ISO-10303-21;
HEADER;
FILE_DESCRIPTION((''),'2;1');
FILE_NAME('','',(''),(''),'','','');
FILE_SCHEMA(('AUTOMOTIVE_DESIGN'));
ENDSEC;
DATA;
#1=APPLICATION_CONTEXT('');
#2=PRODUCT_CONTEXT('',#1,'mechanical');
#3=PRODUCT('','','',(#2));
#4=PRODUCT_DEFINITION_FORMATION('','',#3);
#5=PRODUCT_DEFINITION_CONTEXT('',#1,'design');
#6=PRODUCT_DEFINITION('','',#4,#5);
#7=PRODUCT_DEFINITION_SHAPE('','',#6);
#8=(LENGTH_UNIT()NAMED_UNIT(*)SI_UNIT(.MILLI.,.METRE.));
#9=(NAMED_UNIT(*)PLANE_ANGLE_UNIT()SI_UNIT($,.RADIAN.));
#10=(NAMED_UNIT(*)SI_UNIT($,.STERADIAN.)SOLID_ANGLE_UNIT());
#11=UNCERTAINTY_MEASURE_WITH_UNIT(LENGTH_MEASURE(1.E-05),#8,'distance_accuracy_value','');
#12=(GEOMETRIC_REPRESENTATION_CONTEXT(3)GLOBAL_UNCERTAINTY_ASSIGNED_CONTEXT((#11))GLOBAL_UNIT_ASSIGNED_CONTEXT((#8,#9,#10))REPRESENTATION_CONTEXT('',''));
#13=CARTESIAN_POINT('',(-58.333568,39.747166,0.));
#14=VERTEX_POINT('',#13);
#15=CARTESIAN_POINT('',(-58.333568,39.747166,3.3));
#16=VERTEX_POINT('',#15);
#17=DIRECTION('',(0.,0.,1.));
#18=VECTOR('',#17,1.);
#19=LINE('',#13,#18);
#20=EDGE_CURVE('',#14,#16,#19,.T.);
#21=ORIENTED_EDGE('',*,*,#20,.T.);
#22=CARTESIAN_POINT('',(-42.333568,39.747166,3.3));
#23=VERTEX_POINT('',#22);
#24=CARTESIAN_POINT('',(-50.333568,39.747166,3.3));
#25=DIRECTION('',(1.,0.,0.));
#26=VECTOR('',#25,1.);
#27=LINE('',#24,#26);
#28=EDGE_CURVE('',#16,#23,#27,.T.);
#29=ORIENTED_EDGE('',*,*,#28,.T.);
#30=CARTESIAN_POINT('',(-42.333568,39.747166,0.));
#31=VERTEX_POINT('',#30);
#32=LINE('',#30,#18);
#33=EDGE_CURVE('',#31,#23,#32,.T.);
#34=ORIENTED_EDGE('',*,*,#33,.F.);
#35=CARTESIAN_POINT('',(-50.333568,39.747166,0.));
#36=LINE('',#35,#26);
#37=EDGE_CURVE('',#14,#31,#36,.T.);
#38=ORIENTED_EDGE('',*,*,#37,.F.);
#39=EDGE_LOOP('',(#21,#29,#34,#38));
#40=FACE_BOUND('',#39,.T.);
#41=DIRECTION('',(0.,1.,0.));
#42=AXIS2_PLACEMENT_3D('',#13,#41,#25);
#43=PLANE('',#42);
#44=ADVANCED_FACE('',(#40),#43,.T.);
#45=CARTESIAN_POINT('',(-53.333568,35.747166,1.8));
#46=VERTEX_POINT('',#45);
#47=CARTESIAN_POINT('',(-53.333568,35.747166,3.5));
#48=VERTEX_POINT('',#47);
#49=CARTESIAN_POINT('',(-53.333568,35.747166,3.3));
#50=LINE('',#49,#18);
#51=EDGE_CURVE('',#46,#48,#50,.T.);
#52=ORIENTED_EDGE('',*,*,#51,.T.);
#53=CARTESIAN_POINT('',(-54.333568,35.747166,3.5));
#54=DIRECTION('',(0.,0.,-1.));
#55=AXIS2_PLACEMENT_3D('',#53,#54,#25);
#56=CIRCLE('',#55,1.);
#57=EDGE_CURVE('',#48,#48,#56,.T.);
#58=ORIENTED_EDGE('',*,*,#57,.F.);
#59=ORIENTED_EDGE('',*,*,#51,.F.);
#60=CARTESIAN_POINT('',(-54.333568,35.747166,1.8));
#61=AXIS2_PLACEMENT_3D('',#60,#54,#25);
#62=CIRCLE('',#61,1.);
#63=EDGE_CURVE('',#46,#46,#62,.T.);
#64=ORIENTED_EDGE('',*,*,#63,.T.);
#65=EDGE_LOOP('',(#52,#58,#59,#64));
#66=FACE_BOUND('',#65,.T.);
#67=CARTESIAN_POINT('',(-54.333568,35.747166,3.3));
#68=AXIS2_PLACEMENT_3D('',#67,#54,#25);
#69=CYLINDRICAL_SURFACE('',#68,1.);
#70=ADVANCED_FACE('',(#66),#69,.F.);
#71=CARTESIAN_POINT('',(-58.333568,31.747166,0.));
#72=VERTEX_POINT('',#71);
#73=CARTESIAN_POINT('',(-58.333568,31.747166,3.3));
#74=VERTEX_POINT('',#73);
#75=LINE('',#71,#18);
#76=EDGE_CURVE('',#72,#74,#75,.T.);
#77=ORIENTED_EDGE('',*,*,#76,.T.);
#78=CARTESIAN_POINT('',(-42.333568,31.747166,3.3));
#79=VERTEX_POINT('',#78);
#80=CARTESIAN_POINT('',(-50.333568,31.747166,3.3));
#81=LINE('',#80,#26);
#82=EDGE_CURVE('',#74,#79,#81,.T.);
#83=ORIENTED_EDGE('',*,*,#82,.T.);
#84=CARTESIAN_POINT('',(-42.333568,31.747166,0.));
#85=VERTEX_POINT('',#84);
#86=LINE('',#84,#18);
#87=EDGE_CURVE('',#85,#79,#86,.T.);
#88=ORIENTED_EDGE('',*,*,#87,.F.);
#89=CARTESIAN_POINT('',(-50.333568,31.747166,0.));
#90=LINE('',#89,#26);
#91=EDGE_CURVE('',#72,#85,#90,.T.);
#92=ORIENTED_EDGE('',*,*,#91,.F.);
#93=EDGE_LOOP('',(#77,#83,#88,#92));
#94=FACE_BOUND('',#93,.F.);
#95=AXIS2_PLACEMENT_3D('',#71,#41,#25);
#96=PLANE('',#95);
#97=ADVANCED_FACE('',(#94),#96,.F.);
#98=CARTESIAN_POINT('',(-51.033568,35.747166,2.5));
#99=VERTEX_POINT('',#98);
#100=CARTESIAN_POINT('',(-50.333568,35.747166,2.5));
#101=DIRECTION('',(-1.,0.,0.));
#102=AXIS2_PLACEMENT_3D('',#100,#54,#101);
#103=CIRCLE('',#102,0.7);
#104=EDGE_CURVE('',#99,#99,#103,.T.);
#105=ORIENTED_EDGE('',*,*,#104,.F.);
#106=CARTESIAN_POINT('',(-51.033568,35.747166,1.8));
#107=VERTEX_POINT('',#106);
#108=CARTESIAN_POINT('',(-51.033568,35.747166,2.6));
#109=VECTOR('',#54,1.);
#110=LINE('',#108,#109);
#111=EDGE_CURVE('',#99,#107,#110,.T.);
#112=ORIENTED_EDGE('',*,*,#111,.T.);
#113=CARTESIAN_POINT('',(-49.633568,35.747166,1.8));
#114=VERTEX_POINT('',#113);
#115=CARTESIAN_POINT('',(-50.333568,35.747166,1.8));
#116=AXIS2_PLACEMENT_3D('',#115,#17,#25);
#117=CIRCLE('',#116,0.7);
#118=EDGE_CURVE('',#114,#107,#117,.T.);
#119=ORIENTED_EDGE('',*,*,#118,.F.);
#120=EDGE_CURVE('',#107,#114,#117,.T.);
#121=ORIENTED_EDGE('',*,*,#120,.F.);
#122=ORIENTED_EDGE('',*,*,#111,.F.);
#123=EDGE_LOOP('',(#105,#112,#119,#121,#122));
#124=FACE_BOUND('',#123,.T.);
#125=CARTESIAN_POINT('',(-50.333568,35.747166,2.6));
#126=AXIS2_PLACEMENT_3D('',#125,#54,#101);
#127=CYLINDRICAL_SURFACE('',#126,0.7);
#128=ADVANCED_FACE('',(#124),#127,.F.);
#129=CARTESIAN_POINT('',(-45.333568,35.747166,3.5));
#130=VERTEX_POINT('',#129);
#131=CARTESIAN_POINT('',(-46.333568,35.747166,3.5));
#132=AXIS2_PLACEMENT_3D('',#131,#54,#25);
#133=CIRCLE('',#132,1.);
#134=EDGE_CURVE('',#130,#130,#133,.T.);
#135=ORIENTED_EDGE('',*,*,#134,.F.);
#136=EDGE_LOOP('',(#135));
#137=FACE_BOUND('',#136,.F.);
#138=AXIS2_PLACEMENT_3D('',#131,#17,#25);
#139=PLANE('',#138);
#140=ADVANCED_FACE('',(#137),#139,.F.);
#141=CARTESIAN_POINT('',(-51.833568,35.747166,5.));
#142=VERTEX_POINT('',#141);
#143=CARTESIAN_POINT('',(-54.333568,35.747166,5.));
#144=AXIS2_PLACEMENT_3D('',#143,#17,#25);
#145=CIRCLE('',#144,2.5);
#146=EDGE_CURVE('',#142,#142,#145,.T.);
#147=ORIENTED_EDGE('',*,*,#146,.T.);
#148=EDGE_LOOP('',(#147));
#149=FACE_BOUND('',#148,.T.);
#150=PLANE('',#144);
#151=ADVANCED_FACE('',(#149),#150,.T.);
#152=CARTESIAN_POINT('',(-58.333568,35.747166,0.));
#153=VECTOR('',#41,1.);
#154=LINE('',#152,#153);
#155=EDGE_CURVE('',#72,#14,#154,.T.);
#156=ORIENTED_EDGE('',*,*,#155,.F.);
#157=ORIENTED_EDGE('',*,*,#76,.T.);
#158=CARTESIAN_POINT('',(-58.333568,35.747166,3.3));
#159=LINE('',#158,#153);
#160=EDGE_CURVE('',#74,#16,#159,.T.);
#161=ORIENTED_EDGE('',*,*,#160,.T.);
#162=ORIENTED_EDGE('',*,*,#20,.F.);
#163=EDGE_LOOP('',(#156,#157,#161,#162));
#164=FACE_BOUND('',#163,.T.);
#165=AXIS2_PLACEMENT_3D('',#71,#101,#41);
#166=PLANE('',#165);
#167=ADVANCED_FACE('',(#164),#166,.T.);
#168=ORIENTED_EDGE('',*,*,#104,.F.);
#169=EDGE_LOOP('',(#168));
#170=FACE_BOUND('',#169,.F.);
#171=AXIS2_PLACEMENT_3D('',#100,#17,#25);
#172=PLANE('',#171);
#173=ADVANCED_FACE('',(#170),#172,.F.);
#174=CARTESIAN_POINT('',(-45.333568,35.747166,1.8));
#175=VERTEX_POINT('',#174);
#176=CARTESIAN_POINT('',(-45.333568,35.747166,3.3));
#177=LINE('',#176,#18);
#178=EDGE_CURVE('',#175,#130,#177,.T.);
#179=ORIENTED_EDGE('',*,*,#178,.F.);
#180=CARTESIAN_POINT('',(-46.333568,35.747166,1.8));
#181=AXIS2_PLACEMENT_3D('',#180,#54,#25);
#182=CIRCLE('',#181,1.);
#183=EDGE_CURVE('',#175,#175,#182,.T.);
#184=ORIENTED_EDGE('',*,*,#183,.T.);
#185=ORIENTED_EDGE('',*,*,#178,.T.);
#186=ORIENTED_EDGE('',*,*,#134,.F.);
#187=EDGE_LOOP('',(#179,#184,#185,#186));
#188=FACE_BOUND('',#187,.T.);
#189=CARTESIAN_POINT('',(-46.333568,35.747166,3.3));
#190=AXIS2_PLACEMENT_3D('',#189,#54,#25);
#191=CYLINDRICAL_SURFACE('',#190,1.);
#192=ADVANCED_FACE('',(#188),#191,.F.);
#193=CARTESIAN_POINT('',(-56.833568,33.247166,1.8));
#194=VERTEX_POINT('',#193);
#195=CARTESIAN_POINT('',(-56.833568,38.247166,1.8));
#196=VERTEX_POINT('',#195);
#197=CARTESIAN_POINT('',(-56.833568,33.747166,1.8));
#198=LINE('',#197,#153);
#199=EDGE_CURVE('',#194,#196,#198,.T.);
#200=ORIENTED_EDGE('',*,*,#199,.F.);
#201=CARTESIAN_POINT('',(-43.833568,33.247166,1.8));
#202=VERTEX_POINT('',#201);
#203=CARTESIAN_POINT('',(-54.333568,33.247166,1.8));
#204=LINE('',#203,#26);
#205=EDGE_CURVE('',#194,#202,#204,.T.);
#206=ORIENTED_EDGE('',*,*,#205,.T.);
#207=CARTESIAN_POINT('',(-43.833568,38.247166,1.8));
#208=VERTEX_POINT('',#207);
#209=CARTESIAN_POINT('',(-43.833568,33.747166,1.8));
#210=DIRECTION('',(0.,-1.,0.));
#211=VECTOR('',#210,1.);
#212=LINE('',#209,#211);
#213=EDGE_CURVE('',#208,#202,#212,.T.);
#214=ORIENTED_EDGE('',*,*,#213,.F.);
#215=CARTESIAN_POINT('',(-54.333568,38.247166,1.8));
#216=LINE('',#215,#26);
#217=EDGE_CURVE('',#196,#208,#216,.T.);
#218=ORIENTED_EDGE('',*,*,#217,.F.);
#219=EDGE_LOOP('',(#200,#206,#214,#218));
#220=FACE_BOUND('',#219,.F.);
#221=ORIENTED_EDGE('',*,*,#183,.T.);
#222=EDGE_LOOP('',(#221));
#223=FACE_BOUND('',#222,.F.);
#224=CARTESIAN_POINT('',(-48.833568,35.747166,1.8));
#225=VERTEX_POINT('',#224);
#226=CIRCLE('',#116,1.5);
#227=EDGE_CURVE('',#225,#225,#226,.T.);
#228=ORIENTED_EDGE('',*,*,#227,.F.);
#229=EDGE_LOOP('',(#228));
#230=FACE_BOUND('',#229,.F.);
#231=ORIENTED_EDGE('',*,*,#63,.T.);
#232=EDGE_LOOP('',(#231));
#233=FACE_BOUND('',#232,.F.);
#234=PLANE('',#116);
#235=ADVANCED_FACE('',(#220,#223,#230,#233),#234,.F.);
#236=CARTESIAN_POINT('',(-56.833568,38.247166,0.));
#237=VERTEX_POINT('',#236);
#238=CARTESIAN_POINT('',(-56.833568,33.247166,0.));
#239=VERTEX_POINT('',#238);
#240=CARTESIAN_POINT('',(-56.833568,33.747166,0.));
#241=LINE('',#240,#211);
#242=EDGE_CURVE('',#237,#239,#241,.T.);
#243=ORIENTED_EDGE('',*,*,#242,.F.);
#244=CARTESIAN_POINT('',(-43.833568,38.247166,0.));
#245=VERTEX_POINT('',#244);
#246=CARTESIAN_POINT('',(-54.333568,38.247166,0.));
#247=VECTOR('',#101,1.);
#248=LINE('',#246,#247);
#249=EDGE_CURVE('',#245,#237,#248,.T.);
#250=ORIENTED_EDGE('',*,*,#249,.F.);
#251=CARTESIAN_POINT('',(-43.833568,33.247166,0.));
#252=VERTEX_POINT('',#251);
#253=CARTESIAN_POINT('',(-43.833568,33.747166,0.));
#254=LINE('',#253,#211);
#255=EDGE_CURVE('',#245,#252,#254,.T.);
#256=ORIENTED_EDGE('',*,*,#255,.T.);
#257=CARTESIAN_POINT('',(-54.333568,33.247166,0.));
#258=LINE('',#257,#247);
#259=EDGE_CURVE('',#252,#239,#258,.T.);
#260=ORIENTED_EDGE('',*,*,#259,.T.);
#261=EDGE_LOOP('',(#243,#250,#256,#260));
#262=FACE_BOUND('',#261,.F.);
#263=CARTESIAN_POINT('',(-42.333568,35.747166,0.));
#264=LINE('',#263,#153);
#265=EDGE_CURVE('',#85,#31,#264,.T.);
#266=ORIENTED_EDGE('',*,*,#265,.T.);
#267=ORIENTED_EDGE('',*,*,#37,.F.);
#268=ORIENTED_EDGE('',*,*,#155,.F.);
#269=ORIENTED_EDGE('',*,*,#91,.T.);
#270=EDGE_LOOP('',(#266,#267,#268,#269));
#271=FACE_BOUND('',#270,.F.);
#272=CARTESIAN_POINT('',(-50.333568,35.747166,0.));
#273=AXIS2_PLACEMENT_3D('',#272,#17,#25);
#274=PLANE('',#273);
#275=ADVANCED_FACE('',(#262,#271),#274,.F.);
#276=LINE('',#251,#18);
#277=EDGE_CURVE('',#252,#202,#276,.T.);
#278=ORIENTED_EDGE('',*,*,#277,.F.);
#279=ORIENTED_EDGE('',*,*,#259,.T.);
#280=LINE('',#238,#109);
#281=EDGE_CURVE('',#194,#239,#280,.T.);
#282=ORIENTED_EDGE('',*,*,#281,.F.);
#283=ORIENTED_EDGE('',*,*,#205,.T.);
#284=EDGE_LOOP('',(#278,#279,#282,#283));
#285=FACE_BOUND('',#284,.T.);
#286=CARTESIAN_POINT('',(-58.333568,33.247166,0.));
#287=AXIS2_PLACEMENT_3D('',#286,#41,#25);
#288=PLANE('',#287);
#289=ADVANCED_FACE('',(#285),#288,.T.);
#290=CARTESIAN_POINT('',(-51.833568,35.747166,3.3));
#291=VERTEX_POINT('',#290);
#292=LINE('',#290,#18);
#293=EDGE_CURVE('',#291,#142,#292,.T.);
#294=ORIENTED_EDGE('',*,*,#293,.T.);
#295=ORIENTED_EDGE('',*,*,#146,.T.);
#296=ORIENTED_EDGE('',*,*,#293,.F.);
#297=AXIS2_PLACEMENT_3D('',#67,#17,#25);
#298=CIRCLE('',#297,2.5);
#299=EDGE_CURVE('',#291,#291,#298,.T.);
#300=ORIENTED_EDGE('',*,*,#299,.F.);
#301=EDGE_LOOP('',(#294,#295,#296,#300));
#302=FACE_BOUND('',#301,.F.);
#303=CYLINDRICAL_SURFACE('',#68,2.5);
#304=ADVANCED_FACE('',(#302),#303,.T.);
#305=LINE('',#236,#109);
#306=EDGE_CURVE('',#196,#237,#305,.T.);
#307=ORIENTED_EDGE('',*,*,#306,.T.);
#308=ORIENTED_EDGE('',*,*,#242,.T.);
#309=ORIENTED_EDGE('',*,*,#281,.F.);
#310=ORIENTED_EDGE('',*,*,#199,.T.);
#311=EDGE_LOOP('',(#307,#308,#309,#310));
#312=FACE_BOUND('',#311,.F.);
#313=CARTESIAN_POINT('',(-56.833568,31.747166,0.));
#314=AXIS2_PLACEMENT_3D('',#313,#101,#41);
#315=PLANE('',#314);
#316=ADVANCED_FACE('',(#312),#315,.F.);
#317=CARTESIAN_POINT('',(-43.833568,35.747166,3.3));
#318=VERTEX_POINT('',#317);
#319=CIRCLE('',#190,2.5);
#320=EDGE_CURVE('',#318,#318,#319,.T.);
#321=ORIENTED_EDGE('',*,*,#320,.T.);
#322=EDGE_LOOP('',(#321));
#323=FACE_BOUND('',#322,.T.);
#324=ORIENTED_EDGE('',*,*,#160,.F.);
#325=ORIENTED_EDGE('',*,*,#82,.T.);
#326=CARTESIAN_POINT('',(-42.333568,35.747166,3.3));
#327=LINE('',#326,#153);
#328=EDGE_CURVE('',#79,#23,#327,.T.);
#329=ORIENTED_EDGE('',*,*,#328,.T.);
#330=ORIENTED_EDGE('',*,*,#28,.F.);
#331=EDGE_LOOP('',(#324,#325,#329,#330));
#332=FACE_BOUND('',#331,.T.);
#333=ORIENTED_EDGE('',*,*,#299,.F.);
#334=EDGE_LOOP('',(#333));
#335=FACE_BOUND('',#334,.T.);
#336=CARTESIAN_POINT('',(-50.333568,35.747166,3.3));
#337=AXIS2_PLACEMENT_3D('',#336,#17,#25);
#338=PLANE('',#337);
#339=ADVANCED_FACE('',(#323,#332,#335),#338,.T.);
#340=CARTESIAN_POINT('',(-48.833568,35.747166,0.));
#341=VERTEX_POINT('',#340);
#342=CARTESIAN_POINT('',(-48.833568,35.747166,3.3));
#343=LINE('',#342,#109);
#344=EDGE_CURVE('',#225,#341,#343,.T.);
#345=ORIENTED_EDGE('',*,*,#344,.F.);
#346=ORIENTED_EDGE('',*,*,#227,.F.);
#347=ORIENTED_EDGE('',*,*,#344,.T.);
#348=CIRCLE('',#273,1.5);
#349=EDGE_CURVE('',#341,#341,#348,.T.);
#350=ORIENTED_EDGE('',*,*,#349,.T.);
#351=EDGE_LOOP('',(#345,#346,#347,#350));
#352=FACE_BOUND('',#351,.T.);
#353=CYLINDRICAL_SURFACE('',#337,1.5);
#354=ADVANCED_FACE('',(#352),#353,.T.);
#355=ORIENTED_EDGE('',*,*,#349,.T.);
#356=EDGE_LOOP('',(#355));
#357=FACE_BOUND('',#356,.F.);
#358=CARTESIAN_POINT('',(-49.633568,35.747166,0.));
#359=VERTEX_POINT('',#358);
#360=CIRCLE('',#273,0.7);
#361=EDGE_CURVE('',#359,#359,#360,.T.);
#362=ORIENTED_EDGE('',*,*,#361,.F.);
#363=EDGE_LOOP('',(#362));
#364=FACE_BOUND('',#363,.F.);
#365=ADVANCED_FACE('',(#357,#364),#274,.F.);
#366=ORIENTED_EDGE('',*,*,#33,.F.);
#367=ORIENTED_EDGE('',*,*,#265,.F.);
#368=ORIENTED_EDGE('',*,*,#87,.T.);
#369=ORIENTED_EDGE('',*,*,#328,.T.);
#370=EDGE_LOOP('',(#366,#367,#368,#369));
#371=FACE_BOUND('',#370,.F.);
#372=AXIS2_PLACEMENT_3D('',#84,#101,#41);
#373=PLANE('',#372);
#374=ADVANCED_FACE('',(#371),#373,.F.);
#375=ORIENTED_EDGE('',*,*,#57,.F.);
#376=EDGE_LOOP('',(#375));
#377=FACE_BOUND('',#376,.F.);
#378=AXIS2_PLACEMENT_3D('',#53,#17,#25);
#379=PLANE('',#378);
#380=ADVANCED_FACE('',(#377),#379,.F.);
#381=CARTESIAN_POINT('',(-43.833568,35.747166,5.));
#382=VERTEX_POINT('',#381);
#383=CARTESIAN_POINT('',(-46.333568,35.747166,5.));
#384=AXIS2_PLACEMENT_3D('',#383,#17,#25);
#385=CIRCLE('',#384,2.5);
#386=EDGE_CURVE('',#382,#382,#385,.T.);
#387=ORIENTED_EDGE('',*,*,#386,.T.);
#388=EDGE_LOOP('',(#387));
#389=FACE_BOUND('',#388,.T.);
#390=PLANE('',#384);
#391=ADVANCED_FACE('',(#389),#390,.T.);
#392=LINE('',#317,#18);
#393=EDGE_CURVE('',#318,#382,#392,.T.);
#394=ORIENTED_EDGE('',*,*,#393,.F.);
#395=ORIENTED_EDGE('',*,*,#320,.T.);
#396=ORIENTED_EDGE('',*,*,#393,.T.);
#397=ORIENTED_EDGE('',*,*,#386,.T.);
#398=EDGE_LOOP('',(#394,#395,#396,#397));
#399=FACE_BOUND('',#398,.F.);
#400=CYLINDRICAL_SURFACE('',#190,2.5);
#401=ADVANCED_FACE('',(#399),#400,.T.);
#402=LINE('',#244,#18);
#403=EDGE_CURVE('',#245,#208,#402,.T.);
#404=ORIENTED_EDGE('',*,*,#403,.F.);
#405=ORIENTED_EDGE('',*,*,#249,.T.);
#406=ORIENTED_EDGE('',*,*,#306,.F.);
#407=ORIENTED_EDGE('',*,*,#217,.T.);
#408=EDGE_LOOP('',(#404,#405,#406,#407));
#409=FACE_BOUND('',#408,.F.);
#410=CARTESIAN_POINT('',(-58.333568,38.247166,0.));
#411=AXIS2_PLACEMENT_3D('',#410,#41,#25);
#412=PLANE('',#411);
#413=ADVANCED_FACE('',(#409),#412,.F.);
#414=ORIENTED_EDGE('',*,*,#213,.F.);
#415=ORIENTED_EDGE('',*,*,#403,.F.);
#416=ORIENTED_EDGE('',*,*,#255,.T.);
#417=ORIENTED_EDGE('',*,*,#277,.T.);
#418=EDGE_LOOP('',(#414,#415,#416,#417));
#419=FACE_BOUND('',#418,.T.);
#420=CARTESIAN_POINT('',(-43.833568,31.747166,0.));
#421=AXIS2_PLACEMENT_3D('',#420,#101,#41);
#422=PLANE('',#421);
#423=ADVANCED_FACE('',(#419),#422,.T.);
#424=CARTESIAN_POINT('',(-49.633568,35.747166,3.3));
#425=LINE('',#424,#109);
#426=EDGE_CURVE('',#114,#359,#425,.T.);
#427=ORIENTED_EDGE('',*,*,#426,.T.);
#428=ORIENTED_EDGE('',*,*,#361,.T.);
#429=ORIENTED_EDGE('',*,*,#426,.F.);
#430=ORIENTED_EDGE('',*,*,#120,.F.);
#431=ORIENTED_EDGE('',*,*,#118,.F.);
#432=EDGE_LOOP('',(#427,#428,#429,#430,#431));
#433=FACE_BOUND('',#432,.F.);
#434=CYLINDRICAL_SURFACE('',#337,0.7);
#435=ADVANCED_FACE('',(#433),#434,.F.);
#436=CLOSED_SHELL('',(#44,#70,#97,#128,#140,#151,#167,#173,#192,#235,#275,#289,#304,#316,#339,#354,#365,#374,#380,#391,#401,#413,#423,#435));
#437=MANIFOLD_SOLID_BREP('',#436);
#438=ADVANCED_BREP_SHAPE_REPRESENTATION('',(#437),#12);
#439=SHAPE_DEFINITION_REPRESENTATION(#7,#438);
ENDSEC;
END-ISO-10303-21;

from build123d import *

# Parameters (mm, degrees)
F0_W        = 16
F0_H        = 8
F1_DEPTH    = 3.3
F3_R        = 2.5
F4_DEPTH    = 1.7
F6_T        = -1.5
F7_DEPTH    = 3.3
F8_T        = 0.8
F8_T3_DEPTH = 3.4
F8_T5_DEPTH = 6.6
F8_T7_DEPTH = 14.6


# Not quite as in the source:
# - a shell that OpenCascade refuses in one call is made with other operations: the cavity is built on its own and cut out


with BuildPart() as f1:
    # F0 (on Top) → F1 (new body)
    with BuildSketch(Plane.XY):
        with Locations((-50.3335684606, 35.747165516)):
            Rectangle(F0_W, F0_H)
    extrude(amount=F1_DEPTH)

    # F3 (on face) → F4 (join)
    with BuildSketch(Plane.XY.offset(3.3)):
        with Locations((-46.3335684606, 35.747165516)):
            Circle(F3_R)
        with Locations((-54.3335684606, 35.747165516)):
            Circle(F3_R)
    extrude(amount=F4_DEPTH)

    # F6
    f6_openings = [f1.faces().sort_by_distance(p)[0] for p in [
        (-50.333568, 35.747166, 0),
    ]]
    offset(amount=F6_T, openings=f6_openings, kind=Kind.INTERSECTION)

    # F5 (on face) → F7 (join)
    with BuildSketch(Plane.XY.offset(3.3)):
        with BuildLine():
            ThreePointArc((-51.8335684606, 35.747165516), (-50.3335684606, 34.247165516), (-48.8335684606, 35.747165516))
            ThreePointArc((-48.8335684606, 35.747165516), (-50.3335684606, 37.247165516), (-51.8335684606, 35.747165516))
        make_face()
    extrude(amount=-F7_DEPTH)

    # F8: shell of thickness 0.8, made by hand


with BuildPart() as f8_core1:
    # F8_t2: copy of F1
    add(f1.part)

    # the walls: a layer under each face that stays
    f8_faces = [f8_core1.faces().sort_by_distance(p)[0] for p in [
        (-50.3335684606, 39.747165516, 1.65),
        (-50.3335684606, 35.747165516, 3.3),
        (-48.8335684606, 35.747165516, 4.15),
        (-46.3335684606, 35.747165516, 5),
        (-56.8335684606, 35.747165516, 4.15),
        (-54.3335684606, 35.747165516, 5),
        (-50.3335684606, 31.747165516, 1.65),
        (-55.666901794, 33.0804988494, 0),
        (-56.8335684606, 35.747165516, 0.9),
        (-54.666901794, 34.0804988494, 1.8),
        (-47.3335684606, 35.747165516, 2.65),
        (-46.3335684606, 35.747165516, 3.5),
        (-48.8335684606, 35.747165516, 0.9),
        (-55.3335684606, 35.747165516, 2.65),
        (-54.3335684606, 35.747165516, 3.5),
        (-50.3335684606, 33.247165516, 0.9),
        (-43.8335684606, 35.747165516, 0.9),
        (-50.3335684606, 38.247165516, 0.9),
        (-58.3335684606, 35.747165516, 1.65),
        (-42.3335684606, 35.747165516, 1.65),
    ]]
    thicken(f8_faces, amount=-F8_T, mode=Mode.SUBTRACT)

    # F8_s4 → F8_t3 (cut)
    with BuildSketch(Plane.XY.offset(-0.8)):
        Polygon((-56.8255684606, 33.255165516), (-57.6335684606, 33.247165516), (-57.6335684606, 32.447165516), (-56.8335684606, 32.447165516), align=None)
        Polygon((-56.8255684606, 38.239165516), (-57.6335684606, 38.247165516), (-57.6335684606, 39.047165516), (-56.8335684606, 39.047165516), align=None)
        Polygon((-43.8415684606, 33.255165516), (-43.8335684606, 32.447165516), (-43.0335684606, 32.447165516), (-43.0335684606, 33.247165516), align=None)
        Polygon((-43.8415684606, 38.239165516), (-43.0335684606, 38.247165516), (-43.0335684606, 39.047165516), (-43.8335684606, 39.047165516), align=None)
    extrude(amount=F8_T3_DEPTH, mode=Mode.SUBTRACT)

    # F8_s6 → F8_t5 (cut)
    with BuildSketch(Plane.XZ.offset(-39.047165516)):
        Polygon((-56.8255684606, 1.792), (-57.6335684606, 1.8), (-57.6335684606, 2.6), (-56.8335684606, 2.6), align=None)
        Polygon((-43.8415684606, 1.792), (-43.8335684606, 2.6), (-43.0335684606, 2.6), (-43.0335684606, 1.8), align=None)
    extrude(amount=F8_T5_DEPTH, mode=Mode.SUBTRACT)

    # F8_s8 → F8_t7 (cut)
    with BuildSketch(Plane.YZ.offset(-57.6335684606)):
        Polygon((33.255165516, 1.792), (33.247165516, 2.6), (32.447165516, 2.6), (32.447165516, 1.8), align=None)
        Polygon((38.239165516, 1.792), (38.247165516, 2.6), (39.047165516, 2.6), (39.047165516, 1.8), align=None)
    extrude(amount=F8_T7_DEPTH, mode=Mode.SUBTRACT)

    # F8_s9 → F8_t10 (revolve, cut)
    with BuildSketch(Plane.XZ.offset(-35.747165516)):
        Polygon((-51.8255684606, 3.308), (-51.8335684606, 2.5), (-52.6335684606, 2.5), (-52.6335684606, 3.3), align=None)
    revolve(axis=Axis((-54.3335684606, 35.747165516, 3.3), (0, 0, 1)), mode=Mode.SUBTRACT)

    # F8_s11 → F8_t12 (revolve, cut)
    with BuildSketch(Plane.XZ.offset(-35.747165516)):
        Polygon((-43.8255684606, 3.308), (-43.8335684606, 2.5), (-44.6335684606, 2.5), (-44.6335684606, 3.3), align=None)
    revolve(axis=Axis((-46.3335684606, 35.747165516, 3.3), (0, 0, -1)), mode=Mode.SUBTRACT)

    # F8_s13 → F8_t14 (revolve, cut)
    with BuildSketch(Plane.XZ.offset(-35.747165516)):
        Polygon((-51.8415684606, 1.792), (-51.8335684606, 2.6), (-51.0335684606, 2.6), (-51.0335684606, 1.8), align=None)
    revolve(axis=Axis((-50.3335684606, 35.747165516, 1.8), (0, 0, 1)), mode=Mode.SUBTRACT)

    # F8_s15 → F8_t16 (revolve, cut)
    with BuildSketch(Plane.XZ.offset(-35.747165516)):
        Polygon((-45.3415684606, 3.492), (-44.5335684606, 3.5), (-44.5335684606, 4.3), (-45.3335684606, 4.3), align=None)
    revolve(axis=Axis((-46.3335684606, 35.747165516, 3.5), (0, 0, -1)), mode=Mode.SUBTRACT)

    # F8_s17 → F8_t18 (revolve, cut)
    with BuildSketch(Plane.XZ.offset(-35.747165516)):
        Polygon((-53.3415684606, 3.492), (-52.5335684606, 3.5), (-52.5335684606, 4.3), (-53.3335684606, 4.3), align=None)
    revolve(axis=Axis((-54.3335684606, 35.747165516, 3.5), (0, 0, -1)), mode=Mode.SUBTRACT)


with BuildPart() as f1_1:
    add(f1.part)

    # what is left inside the walls is the cavity
    f8_cavity = [f8_core1.part.solids().sort_by_distance(p)[0] for p in [
        (-49.641568, 35.747166, 1.666667),
    ]]
    add(f8_cavity, mode=Mode.SUBTRACT)


solid = f1_1.part
